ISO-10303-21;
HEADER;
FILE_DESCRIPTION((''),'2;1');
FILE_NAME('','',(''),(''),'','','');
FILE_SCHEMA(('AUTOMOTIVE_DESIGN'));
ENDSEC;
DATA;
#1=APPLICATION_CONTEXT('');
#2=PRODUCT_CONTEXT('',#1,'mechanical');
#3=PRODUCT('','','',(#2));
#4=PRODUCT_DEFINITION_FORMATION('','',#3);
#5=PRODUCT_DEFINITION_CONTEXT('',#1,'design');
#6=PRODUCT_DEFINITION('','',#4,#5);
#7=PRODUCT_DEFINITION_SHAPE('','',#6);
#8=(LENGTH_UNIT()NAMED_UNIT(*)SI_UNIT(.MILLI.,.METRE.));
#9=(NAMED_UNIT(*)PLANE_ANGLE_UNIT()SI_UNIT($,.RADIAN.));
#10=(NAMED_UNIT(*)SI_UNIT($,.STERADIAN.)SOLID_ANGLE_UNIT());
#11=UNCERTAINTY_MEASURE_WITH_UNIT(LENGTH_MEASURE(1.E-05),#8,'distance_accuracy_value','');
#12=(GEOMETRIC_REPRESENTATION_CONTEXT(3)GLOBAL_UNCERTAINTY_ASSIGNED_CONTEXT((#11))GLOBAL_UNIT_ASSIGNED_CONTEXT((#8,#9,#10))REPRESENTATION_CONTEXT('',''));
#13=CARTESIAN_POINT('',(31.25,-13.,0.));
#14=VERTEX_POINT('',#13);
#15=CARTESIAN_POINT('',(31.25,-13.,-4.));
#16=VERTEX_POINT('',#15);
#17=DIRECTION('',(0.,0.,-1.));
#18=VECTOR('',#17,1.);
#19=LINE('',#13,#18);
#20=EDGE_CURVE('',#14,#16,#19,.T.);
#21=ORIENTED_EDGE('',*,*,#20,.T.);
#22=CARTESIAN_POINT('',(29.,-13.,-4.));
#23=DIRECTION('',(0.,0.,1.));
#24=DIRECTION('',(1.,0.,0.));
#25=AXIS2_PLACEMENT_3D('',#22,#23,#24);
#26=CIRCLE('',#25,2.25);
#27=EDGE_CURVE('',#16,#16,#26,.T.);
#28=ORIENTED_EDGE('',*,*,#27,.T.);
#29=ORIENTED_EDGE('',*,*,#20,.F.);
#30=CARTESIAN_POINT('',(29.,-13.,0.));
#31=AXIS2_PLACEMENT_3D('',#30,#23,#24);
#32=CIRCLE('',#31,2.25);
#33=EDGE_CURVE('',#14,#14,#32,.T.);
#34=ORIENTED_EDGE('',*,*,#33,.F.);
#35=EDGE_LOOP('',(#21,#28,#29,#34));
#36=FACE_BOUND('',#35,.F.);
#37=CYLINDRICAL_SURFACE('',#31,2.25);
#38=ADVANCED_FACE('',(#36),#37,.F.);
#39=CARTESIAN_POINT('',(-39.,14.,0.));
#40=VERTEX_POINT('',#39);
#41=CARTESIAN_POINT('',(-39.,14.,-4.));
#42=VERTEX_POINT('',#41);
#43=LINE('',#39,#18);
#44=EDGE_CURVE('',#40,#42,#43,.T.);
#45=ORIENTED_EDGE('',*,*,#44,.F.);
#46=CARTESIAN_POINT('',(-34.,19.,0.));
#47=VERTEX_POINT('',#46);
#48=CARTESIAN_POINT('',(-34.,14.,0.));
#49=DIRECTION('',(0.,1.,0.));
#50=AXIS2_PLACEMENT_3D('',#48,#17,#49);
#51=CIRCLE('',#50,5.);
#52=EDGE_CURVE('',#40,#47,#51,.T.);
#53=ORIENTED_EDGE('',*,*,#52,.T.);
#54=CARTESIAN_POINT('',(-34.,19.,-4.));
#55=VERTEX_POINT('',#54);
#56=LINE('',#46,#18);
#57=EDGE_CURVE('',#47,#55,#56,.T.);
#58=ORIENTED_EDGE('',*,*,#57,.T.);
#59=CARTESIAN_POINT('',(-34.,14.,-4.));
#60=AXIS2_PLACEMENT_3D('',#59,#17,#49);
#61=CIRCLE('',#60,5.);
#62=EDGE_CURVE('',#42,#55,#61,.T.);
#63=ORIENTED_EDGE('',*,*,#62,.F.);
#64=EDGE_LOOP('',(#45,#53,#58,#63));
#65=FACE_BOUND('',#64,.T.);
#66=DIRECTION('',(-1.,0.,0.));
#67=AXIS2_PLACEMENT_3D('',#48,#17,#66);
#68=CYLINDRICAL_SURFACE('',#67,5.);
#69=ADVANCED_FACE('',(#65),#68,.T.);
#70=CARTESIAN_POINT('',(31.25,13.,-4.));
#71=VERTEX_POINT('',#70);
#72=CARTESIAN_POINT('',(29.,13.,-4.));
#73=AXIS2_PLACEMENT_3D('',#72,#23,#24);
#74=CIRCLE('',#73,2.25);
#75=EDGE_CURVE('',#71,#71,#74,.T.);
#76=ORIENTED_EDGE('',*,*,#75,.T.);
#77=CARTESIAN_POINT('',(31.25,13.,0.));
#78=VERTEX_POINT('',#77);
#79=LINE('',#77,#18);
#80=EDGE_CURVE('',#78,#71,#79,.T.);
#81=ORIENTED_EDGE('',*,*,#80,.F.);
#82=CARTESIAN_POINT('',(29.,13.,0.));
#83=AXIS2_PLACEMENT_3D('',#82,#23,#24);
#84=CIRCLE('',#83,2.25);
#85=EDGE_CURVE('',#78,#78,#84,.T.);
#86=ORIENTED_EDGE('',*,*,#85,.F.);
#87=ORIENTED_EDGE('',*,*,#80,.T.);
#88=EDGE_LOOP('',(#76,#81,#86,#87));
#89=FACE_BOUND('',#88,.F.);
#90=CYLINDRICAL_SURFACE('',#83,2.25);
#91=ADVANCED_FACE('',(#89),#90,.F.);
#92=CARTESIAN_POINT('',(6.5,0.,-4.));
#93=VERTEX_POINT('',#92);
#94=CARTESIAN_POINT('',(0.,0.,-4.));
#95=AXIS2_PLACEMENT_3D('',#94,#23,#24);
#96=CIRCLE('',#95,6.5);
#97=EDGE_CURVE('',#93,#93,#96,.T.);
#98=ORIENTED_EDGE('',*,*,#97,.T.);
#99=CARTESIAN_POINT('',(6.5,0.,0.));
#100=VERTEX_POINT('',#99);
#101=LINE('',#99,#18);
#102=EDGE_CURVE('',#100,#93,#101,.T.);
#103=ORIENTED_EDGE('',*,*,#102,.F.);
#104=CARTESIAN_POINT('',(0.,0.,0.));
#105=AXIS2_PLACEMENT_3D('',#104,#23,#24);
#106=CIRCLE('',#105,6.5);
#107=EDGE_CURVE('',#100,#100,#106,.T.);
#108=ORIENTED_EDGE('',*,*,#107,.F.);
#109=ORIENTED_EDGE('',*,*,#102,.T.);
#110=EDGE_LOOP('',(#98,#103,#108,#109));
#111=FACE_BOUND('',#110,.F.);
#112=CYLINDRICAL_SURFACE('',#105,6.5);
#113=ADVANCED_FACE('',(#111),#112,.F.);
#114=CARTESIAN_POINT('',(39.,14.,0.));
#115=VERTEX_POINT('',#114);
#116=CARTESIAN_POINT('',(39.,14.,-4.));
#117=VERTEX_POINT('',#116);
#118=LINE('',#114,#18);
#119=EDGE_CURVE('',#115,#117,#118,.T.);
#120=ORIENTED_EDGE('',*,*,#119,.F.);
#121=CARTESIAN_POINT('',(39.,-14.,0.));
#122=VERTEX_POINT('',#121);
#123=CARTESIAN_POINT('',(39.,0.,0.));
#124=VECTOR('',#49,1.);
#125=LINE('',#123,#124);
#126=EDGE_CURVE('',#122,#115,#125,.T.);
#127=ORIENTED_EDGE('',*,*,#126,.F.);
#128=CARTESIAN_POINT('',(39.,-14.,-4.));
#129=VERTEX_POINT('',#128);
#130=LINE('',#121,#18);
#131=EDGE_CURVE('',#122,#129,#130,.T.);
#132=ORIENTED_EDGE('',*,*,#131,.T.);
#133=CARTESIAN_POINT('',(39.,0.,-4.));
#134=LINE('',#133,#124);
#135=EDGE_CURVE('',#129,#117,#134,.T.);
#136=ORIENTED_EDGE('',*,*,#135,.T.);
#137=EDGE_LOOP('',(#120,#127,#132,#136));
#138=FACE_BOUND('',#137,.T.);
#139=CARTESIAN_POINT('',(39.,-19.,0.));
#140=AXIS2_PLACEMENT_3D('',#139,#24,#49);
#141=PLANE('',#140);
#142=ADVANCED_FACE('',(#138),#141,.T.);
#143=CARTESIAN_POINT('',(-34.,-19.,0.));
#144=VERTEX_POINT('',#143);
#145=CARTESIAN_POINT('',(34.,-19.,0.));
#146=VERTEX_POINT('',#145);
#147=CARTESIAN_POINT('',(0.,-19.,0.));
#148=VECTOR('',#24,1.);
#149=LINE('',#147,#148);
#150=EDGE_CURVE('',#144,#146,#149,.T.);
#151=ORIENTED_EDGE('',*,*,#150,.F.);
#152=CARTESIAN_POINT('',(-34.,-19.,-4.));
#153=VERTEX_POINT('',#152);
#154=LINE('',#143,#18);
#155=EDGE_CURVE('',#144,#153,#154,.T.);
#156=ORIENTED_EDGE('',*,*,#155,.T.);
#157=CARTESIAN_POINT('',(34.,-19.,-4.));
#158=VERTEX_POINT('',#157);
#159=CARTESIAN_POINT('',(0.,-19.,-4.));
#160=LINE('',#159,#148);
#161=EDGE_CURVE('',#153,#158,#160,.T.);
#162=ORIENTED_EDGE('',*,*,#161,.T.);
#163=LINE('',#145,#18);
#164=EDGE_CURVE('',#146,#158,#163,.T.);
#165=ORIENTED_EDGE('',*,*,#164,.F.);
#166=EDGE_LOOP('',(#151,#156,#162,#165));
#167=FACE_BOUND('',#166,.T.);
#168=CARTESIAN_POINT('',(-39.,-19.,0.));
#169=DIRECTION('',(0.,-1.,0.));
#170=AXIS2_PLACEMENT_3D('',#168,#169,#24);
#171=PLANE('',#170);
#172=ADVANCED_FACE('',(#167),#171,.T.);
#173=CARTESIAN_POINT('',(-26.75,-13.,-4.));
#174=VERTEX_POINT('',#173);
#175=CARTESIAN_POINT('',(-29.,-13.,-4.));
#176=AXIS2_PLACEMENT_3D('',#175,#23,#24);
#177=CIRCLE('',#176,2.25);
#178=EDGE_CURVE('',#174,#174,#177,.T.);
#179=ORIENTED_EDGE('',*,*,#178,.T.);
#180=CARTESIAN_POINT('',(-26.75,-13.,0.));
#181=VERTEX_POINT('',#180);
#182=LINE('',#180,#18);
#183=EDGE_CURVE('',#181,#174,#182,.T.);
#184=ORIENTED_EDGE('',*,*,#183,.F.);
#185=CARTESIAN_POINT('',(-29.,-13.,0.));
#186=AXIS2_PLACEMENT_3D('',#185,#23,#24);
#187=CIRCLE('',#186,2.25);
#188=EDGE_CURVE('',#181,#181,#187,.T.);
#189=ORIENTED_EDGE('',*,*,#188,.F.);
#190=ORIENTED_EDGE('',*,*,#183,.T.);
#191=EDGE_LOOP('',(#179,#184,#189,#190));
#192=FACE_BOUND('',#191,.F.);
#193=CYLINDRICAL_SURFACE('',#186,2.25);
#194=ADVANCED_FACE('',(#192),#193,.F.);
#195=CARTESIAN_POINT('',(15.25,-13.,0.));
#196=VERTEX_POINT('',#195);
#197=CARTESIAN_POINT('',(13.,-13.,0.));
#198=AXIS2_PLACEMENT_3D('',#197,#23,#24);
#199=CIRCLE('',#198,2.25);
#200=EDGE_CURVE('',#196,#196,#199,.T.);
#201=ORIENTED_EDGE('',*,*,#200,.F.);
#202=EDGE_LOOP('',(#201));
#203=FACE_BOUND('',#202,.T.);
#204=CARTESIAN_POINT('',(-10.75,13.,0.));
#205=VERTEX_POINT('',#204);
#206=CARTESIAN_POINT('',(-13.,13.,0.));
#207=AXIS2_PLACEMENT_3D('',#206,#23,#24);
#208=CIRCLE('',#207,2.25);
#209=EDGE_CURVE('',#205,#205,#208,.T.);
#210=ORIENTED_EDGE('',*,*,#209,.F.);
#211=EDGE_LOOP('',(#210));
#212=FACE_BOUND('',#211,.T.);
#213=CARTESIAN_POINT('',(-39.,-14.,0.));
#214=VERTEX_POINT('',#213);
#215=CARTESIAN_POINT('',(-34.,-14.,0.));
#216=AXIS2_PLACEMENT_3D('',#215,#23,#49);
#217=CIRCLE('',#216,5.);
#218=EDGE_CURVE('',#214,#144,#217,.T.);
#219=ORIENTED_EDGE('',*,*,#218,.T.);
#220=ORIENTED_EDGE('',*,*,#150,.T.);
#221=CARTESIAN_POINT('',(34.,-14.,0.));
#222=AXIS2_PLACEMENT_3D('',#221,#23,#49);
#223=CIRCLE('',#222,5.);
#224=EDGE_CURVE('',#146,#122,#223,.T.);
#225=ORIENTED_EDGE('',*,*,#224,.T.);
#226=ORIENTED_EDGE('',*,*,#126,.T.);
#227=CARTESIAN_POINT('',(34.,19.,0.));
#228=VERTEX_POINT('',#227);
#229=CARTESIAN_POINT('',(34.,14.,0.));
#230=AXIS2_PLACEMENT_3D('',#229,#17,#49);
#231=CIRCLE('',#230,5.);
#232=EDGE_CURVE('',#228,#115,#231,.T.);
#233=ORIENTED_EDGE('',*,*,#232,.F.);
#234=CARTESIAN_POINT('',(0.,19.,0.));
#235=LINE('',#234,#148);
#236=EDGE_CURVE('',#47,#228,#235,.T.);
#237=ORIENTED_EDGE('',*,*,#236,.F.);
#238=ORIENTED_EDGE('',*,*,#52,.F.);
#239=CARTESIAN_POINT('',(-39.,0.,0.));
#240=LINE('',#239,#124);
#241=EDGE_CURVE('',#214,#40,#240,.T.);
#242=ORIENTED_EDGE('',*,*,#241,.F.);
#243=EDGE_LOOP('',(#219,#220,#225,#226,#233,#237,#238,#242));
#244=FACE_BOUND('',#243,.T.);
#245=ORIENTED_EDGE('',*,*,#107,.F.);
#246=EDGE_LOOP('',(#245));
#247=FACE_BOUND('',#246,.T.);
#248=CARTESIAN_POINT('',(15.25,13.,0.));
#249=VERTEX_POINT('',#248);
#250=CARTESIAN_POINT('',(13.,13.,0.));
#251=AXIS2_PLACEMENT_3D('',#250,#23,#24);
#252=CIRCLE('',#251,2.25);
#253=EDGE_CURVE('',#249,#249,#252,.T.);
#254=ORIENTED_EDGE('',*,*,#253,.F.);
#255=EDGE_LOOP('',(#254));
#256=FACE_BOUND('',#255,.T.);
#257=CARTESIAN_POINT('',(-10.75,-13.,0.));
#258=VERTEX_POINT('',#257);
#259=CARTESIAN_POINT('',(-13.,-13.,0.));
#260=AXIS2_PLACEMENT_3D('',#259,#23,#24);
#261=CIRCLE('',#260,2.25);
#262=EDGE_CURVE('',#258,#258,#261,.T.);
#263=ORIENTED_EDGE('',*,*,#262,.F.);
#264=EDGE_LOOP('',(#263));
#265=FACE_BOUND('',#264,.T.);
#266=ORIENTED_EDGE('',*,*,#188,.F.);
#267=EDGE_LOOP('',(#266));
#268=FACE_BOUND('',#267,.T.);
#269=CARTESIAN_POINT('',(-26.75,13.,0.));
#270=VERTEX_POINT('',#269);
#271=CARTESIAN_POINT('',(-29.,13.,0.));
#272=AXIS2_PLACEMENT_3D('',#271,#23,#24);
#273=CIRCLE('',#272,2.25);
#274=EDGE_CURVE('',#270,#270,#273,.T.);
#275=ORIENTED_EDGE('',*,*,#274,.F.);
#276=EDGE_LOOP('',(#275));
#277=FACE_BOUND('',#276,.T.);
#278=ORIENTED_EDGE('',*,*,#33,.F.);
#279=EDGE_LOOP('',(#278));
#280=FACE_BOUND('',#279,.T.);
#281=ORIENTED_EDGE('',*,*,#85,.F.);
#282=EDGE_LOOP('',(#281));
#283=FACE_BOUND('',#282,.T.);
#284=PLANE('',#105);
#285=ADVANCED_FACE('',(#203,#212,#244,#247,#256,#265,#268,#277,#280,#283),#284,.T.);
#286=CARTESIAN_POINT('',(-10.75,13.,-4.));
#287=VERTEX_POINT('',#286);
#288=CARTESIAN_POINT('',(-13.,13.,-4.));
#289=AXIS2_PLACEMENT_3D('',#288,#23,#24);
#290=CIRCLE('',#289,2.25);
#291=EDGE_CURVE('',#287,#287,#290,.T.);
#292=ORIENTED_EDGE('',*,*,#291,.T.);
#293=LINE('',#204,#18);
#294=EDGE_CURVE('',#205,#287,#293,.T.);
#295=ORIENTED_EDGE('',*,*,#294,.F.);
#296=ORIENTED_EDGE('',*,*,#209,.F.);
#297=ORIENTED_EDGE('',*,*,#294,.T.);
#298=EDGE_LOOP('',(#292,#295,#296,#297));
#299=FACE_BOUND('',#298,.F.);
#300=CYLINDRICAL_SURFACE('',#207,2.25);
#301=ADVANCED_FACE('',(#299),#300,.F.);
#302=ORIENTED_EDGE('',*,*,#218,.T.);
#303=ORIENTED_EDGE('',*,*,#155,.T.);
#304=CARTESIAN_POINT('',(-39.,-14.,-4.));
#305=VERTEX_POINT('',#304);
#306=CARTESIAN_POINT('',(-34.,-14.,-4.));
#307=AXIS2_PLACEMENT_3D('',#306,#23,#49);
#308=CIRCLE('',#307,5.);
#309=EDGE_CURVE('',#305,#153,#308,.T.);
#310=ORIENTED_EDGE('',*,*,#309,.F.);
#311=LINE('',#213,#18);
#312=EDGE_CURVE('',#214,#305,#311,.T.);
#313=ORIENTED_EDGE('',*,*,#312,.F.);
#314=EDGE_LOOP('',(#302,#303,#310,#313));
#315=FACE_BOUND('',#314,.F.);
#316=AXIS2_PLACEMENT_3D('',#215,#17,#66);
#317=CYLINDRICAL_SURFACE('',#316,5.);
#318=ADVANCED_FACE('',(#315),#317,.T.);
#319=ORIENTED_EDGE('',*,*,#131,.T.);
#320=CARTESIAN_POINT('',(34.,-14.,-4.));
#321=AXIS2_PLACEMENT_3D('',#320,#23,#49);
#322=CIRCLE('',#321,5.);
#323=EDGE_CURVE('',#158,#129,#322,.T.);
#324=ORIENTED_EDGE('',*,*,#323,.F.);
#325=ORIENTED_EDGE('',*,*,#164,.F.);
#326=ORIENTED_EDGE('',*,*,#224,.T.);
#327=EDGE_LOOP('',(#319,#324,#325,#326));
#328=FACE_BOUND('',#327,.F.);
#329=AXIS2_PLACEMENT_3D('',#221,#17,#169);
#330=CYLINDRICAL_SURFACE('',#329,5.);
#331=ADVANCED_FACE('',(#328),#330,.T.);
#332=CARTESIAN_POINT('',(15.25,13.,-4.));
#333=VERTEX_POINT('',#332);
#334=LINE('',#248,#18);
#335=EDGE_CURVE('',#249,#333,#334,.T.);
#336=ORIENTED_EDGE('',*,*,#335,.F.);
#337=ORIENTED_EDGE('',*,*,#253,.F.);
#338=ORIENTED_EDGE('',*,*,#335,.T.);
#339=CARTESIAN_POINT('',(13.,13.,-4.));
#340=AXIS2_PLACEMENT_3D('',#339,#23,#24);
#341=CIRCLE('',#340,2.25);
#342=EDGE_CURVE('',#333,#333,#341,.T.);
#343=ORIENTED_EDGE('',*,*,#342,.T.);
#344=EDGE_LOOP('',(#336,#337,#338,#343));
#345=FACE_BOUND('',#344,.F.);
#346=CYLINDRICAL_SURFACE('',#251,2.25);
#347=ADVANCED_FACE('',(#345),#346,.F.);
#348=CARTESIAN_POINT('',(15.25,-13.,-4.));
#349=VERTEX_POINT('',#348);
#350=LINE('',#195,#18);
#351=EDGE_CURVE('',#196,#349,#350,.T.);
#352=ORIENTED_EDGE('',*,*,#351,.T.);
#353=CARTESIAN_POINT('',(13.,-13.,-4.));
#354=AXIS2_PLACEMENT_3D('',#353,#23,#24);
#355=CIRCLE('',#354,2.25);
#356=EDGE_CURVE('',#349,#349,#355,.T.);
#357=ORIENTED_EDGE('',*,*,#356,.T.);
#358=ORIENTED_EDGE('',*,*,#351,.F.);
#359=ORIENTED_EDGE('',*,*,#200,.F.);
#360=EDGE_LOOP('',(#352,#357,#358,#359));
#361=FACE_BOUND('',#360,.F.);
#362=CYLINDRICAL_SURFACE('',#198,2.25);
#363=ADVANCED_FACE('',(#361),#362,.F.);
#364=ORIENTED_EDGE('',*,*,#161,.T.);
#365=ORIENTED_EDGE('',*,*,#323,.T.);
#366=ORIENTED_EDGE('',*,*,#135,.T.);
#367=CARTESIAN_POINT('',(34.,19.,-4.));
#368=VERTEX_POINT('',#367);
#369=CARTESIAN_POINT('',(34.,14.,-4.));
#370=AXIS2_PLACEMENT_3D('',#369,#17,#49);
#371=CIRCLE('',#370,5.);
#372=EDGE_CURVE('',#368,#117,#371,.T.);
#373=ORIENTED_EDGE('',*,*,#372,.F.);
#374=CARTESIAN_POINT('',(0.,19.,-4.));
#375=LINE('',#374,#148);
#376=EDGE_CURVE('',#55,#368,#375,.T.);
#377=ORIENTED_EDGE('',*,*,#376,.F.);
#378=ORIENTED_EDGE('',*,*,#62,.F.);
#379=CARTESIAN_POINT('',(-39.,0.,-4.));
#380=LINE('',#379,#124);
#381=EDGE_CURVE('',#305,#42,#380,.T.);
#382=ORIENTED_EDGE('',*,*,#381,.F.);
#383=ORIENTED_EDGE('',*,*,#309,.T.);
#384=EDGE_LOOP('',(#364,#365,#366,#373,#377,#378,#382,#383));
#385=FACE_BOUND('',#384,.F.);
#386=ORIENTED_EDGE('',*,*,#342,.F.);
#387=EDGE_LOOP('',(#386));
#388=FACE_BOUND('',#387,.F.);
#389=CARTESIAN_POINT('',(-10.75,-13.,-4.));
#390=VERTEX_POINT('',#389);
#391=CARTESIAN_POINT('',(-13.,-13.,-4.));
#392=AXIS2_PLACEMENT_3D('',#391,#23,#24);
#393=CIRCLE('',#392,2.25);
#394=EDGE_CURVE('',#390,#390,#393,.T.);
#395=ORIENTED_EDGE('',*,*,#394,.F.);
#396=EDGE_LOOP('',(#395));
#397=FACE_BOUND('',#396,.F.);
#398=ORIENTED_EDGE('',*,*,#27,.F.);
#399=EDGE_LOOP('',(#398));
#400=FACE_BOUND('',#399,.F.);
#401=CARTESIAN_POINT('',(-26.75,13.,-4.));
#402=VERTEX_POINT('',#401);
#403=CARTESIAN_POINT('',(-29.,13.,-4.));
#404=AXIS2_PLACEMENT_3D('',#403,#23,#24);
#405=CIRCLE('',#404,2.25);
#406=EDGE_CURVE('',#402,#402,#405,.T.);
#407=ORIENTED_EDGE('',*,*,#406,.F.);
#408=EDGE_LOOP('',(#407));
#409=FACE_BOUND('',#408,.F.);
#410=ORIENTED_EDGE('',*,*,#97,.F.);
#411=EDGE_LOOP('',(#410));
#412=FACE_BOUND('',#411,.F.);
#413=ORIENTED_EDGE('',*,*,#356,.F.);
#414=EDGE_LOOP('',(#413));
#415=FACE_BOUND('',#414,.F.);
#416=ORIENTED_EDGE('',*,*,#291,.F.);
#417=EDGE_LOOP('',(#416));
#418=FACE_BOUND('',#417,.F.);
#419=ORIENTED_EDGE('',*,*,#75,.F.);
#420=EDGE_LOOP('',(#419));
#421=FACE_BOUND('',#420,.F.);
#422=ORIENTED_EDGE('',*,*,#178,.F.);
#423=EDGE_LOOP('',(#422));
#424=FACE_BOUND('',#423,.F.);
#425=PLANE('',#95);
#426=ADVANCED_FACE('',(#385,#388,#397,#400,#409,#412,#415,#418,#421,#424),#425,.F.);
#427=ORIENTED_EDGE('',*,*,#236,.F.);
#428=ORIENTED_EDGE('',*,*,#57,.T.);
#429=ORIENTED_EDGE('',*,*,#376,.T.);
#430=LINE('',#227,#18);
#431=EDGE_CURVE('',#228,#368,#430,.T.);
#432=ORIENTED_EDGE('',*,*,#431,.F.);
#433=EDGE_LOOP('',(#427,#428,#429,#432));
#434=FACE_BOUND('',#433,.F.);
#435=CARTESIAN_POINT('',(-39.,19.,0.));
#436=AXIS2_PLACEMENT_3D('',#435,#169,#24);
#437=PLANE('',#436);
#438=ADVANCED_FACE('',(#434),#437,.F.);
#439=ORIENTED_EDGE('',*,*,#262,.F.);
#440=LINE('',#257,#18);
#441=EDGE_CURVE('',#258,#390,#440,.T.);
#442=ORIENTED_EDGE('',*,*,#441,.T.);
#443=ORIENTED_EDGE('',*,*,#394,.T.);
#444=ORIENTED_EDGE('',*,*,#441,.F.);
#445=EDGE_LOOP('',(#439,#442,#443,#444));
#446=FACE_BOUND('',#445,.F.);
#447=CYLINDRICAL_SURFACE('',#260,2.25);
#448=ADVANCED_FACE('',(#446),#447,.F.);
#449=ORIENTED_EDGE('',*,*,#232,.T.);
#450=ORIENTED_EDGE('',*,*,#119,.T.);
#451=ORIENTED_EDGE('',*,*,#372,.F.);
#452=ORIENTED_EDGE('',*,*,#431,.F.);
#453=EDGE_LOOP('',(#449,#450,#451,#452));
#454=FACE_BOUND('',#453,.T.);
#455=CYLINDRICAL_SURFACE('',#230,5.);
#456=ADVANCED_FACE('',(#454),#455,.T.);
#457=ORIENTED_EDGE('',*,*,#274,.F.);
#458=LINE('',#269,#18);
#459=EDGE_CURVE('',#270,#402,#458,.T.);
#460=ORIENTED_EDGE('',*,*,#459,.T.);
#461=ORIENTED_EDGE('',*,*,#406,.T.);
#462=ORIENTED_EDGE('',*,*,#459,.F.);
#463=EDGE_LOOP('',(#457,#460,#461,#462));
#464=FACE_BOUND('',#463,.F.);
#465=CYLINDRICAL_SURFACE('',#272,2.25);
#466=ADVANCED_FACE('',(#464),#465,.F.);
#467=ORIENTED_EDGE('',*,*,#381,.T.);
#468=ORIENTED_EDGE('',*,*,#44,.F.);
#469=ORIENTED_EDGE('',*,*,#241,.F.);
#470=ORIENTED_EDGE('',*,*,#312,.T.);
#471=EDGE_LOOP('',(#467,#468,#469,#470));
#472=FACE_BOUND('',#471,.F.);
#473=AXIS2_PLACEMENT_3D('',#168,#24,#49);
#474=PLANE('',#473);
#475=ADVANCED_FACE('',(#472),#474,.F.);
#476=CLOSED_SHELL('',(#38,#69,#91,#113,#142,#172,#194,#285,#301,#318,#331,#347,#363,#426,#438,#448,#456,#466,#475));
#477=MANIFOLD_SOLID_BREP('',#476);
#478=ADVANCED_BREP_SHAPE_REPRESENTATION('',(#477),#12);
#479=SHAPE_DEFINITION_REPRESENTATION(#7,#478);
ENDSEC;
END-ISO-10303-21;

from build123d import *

# Parameters (mm, degrees)
F0_W     = 78
F0_H     = 38
F0_R     = 2.25
F0_R_2   = 6.5
F1_DEPTH = 4
F2_R     = 5


# Not quite as in the source:
# - a feature names something its author has since deleted; it is built from what else it names


with BuildPart() as f1:
    # F0 (on Top) → F1 (new body)
    with BuildSketch(Plane.XY):
        Rectangle(F0_W, F0_H)
        with Locations((-29, -13)):
            Circle(F0_R, mode=Mode.SUBTRACT)
        with Locations((-13, -13)):
            Circle(F0_R, mode=Mode.SUBTRACT)
        with Locations((13, -13)):
            Circle(F0_R, mode=Mode.SUBTRACT)
        with Locations((29, -13)):
            Circle(F0_R, mode=Mode.SUBTRACT)
        with Locations((-29, 13)):
            Circle(F0_R, mode=Mode.SUBTRACT)
        with Locations((-13, 13)):
            Circle(F0_R, mode=Mode.SUBTRACT)
        Circle(F0_R_2, mode=Mode.SUBTRACT)
        with Locations((13, 13)):
            Circle(F0_R, mode=Mode.SUBTRACT)
        with Locations((29, 13)):
            Circle(F0_R, mode=Mode.SUBTRACT)
    extrude(amount=-F1_DEPTH)

    # F2
    f2_edges = [f1.edges().sort_by_distance(p)[0] for p in [
        (-39, -19, -2),
        (39, -19, -2),
        (39, 19, -2),
        (-39, 19, -2),
    ]]
    fillet(f2_edges, radius=F2_R)


solid = f1.part
